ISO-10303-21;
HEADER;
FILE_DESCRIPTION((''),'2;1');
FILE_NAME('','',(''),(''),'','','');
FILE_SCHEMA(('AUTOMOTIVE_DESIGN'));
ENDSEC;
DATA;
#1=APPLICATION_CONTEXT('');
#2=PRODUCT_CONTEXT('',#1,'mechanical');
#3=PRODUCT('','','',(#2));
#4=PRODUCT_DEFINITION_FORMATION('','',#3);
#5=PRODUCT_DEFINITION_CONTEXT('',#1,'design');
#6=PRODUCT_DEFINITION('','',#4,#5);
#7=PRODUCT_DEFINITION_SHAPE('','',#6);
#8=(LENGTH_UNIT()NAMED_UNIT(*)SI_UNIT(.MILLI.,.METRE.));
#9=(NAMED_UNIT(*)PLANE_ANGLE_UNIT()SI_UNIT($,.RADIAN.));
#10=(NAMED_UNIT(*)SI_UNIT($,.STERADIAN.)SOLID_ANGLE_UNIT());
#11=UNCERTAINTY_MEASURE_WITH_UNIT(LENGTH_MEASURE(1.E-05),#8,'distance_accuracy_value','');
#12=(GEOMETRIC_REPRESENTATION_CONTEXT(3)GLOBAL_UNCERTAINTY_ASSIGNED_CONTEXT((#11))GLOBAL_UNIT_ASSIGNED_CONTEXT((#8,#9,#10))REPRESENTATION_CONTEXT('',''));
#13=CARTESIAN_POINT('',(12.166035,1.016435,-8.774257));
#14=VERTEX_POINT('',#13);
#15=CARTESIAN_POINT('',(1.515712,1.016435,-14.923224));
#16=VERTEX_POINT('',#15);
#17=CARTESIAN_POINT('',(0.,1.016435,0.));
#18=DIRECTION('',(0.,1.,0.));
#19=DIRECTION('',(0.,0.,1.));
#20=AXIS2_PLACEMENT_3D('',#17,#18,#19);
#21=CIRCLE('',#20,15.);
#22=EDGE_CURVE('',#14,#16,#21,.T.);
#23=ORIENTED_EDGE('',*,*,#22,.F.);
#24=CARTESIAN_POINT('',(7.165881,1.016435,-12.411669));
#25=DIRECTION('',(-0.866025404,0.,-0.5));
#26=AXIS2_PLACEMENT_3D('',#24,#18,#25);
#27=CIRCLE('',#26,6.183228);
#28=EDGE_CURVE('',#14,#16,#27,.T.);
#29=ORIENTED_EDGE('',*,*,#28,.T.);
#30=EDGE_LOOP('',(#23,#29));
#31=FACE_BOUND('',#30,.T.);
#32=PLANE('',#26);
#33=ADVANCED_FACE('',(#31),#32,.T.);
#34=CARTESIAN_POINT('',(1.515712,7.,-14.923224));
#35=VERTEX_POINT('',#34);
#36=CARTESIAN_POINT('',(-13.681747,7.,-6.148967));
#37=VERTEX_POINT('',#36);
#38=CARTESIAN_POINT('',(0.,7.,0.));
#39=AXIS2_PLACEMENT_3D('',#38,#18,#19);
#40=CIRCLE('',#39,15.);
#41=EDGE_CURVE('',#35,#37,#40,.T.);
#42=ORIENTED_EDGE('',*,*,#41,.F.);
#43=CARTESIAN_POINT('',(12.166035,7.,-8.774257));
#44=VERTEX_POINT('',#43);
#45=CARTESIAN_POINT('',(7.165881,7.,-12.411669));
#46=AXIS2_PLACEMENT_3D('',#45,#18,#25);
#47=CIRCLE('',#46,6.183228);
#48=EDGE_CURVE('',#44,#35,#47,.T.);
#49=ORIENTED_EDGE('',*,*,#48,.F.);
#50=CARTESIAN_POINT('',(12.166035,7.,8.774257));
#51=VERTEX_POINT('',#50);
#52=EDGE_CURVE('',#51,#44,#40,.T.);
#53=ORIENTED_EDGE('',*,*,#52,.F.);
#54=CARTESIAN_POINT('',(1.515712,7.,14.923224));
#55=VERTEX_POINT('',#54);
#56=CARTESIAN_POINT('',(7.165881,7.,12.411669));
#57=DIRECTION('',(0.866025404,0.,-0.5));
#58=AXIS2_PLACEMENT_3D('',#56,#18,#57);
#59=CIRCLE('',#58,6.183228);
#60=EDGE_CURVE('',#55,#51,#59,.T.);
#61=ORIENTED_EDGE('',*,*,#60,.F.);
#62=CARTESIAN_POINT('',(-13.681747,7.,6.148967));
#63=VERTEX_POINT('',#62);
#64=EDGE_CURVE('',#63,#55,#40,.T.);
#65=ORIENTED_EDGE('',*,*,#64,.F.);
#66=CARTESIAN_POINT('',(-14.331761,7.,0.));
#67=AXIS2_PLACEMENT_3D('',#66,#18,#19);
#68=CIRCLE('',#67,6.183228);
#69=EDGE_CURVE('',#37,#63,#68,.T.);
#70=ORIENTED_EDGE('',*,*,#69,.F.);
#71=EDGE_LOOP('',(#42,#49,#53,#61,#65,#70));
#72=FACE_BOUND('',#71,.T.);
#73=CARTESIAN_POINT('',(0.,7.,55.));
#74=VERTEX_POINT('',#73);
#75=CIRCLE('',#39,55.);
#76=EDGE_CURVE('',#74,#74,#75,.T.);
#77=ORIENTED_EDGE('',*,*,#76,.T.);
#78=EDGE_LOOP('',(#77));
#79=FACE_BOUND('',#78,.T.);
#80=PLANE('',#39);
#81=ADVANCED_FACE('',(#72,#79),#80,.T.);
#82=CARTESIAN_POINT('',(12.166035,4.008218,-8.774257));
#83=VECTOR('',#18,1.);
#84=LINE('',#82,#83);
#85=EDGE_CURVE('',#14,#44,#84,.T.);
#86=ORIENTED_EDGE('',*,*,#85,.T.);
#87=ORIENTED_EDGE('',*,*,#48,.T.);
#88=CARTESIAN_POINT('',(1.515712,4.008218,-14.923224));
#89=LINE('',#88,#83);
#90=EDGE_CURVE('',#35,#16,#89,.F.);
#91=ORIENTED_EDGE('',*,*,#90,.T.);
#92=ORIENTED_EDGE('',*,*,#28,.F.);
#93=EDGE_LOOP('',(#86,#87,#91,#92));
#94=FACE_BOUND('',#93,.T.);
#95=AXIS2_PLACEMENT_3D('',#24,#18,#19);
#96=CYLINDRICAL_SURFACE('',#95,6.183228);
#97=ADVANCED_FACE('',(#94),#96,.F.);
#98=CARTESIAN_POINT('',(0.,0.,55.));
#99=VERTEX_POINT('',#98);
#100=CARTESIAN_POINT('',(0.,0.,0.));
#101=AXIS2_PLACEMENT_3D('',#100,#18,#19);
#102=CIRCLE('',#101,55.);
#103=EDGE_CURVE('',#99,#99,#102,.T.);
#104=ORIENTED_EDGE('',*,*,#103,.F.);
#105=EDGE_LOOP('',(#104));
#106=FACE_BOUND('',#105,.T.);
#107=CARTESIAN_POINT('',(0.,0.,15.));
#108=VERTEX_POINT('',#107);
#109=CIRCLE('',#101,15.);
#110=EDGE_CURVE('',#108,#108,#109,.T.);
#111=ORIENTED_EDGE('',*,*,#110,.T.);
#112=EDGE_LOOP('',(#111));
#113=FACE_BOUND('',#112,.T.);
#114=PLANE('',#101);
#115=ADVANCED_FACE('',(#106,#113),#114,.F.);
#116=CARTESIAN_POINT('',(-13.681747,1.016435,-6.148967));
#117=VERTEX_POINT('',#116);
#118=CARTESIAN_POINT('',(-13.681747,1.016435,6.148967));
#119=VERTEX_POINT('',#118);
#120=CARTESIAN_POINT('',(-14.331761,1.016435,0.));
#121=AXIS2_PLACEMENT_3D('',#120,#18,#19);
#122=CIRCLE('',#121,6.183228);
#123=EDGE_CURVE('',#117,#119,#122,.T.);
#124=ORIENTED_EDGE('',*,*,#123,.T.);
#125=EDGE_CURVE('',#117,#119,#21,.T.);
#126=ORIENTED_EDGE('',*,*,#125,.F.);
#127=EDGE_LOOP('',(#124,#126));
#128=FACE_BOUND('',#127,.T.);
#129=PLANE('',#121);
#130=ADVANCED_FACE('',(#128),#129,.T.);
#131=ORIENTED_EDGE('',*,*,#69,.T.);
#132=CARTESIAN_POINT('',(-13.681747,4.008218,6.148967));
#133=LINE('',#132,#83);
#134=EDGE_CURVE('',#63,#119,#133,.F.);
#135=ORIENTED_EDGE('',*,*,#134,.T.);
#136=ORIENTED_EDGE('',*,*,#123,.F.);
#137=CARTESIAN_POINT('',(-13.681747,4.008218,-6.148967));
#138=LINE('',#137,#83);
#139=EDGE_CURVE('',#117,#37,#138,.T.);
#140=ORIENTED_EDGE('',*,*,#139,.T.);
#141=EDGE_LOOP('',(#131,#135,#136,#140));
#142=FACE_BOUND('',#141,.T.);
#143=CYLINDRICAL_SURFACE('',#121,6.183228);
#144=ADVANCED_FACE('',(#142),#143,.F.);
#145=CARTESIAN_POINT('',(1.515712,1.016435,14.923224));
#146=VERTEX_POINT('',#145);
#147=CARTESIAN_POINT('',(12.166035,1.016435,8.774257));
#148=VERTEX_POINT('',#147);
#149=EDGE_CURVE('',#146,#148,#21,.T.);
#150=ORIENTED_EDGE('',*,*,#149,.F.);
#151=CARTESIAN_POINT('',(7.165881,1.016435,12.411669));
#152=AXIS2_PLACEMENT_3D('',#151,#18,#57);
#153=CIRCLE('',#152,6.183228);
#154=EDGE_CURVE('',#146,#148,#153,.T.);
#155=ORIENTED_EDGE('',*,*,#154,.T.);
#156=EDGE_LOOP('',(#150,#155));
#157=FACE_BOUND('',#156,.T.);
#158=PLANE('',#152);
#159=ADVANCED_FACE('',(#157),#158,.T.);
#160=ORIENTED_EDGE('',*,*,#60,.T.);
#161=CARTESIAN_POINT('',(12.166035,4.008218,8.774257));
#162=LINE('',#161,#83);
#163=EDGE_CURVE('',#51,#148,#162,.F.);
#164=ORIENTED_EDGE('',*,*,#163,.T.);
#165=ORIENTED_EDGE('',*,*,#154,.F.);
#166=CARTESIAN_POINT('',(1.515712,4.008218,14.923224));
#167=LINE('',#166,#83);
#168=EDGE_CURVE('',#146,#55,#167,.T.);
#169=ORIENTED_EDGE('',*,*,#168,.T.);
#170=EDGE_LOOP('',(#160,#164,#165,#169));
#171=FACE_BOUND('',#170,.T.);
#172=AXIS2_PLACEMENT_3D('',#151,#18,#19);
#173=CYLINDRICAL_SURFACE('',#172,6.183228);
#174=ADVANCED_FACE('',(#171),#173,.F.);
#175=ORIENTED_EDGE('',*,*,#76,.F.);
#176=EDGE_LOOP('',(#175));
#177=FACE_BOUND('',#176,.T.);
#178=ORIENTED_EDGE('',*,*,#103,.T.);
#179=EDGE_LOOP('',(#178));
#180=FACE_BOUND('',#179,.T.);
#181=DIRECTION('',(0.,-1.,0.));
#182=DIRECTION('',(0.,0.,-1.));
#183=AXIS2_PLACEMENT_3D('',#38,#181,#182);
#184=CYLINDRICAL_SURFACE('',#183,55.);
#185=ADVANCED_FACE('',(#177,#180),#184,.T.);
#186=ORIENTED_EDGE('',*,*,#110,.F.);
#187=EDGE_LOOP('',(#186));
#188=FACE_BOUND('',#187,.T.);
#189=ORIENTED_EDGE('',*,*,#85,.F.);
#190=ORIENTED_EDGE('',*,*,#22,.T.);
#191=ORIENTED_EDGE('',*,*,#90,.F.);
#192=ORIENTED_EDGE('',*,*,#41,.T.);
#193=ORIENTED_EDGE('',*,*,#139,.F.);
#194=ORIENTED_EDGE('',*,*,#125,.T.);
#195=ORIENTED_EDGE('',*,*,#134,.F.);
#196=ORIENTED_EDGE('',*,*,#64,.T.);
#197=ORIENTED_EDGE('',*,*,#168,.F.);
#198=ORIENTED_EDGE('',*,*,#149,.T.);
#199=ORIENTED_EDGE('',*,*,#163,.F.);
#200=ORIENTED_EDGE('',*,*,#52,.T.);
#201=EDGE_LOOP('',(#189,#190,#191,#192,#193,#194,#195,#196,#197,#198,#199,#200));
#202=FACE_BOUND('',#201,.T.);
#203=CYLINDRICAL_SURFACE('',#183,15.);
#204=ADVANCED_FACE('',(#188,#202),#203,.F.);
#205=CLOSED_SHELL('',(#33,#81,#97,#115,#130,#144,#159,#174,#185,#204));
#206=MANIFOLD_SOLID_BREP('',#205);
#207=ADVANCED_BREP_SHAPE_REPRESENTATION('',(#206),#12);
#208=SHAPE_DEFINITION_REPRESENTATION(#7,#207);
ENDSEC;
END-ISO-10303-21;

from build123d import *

# Parameters (mm, degrees)
SKETCH1_R           = 55
BOSS_EXTRUDE1_DEPTH = 7
SKETCH2_R           = 15
CUT_EXTRUDE1_DEPTH  = 79.096094653
SKETCH3_R           = 6.183228465
CUT_EXTRUDE2_DEPTH  = 5.983564939
CIRPATTERN1_COUNT   = 3


with BuildPart() as part:
    # Sketch1 → Boss-Extrude1 (new body)
    with BuildSketch(Plane(origin=(0, 0, 0), x_dir=(1, 0, 0), z_dir=(0, 1, 0))):
        Circle(SKETCH1_R)
    extrude(amount=BOSS_EXTRUDE1_DEPTH)

    # Sketch2 → Cut-Extrude1 (cut, through all)
    with BuildSketch(Plane(origin=(0, 0, 0), x_dir=(1, 0, 0), z_dir=(0, 1, 0))):
        Circle(SKETCH2_R)
    extrude(amount=CUT_EXTRUDE1_DEPTH, mode=Mode.SUBTRACT)

    # Sketch3 → Cut-Extrude2 (cut)
    with BuildSketch(Plane(origin=(0, 7, 0), x_dir=(1, 0, 0), z_dir=(0, 1, 0))):
        with Locations((-14.331761049, 0)):
            Circle(SKETCH3_R)
    cut_extrude2 = extrude(amount=-CUT_EXTRUDE2_DEPTH, mode=Mode.SUBTRACT)

    # CirPattern1: Cut-Extrude2 ×3 about axis
    cirpattern1_axis = Axis((0, 0, 0), (0, 1, 0))
    for i in range(1, CIRPATTERN1_COUNT):
        add(cut_extrude2.rotate(cirpattern1_axis, i * 360 / CIRPATTERN1_COUNT), mode=Mode.SUBTRACT)


solid = part.part
